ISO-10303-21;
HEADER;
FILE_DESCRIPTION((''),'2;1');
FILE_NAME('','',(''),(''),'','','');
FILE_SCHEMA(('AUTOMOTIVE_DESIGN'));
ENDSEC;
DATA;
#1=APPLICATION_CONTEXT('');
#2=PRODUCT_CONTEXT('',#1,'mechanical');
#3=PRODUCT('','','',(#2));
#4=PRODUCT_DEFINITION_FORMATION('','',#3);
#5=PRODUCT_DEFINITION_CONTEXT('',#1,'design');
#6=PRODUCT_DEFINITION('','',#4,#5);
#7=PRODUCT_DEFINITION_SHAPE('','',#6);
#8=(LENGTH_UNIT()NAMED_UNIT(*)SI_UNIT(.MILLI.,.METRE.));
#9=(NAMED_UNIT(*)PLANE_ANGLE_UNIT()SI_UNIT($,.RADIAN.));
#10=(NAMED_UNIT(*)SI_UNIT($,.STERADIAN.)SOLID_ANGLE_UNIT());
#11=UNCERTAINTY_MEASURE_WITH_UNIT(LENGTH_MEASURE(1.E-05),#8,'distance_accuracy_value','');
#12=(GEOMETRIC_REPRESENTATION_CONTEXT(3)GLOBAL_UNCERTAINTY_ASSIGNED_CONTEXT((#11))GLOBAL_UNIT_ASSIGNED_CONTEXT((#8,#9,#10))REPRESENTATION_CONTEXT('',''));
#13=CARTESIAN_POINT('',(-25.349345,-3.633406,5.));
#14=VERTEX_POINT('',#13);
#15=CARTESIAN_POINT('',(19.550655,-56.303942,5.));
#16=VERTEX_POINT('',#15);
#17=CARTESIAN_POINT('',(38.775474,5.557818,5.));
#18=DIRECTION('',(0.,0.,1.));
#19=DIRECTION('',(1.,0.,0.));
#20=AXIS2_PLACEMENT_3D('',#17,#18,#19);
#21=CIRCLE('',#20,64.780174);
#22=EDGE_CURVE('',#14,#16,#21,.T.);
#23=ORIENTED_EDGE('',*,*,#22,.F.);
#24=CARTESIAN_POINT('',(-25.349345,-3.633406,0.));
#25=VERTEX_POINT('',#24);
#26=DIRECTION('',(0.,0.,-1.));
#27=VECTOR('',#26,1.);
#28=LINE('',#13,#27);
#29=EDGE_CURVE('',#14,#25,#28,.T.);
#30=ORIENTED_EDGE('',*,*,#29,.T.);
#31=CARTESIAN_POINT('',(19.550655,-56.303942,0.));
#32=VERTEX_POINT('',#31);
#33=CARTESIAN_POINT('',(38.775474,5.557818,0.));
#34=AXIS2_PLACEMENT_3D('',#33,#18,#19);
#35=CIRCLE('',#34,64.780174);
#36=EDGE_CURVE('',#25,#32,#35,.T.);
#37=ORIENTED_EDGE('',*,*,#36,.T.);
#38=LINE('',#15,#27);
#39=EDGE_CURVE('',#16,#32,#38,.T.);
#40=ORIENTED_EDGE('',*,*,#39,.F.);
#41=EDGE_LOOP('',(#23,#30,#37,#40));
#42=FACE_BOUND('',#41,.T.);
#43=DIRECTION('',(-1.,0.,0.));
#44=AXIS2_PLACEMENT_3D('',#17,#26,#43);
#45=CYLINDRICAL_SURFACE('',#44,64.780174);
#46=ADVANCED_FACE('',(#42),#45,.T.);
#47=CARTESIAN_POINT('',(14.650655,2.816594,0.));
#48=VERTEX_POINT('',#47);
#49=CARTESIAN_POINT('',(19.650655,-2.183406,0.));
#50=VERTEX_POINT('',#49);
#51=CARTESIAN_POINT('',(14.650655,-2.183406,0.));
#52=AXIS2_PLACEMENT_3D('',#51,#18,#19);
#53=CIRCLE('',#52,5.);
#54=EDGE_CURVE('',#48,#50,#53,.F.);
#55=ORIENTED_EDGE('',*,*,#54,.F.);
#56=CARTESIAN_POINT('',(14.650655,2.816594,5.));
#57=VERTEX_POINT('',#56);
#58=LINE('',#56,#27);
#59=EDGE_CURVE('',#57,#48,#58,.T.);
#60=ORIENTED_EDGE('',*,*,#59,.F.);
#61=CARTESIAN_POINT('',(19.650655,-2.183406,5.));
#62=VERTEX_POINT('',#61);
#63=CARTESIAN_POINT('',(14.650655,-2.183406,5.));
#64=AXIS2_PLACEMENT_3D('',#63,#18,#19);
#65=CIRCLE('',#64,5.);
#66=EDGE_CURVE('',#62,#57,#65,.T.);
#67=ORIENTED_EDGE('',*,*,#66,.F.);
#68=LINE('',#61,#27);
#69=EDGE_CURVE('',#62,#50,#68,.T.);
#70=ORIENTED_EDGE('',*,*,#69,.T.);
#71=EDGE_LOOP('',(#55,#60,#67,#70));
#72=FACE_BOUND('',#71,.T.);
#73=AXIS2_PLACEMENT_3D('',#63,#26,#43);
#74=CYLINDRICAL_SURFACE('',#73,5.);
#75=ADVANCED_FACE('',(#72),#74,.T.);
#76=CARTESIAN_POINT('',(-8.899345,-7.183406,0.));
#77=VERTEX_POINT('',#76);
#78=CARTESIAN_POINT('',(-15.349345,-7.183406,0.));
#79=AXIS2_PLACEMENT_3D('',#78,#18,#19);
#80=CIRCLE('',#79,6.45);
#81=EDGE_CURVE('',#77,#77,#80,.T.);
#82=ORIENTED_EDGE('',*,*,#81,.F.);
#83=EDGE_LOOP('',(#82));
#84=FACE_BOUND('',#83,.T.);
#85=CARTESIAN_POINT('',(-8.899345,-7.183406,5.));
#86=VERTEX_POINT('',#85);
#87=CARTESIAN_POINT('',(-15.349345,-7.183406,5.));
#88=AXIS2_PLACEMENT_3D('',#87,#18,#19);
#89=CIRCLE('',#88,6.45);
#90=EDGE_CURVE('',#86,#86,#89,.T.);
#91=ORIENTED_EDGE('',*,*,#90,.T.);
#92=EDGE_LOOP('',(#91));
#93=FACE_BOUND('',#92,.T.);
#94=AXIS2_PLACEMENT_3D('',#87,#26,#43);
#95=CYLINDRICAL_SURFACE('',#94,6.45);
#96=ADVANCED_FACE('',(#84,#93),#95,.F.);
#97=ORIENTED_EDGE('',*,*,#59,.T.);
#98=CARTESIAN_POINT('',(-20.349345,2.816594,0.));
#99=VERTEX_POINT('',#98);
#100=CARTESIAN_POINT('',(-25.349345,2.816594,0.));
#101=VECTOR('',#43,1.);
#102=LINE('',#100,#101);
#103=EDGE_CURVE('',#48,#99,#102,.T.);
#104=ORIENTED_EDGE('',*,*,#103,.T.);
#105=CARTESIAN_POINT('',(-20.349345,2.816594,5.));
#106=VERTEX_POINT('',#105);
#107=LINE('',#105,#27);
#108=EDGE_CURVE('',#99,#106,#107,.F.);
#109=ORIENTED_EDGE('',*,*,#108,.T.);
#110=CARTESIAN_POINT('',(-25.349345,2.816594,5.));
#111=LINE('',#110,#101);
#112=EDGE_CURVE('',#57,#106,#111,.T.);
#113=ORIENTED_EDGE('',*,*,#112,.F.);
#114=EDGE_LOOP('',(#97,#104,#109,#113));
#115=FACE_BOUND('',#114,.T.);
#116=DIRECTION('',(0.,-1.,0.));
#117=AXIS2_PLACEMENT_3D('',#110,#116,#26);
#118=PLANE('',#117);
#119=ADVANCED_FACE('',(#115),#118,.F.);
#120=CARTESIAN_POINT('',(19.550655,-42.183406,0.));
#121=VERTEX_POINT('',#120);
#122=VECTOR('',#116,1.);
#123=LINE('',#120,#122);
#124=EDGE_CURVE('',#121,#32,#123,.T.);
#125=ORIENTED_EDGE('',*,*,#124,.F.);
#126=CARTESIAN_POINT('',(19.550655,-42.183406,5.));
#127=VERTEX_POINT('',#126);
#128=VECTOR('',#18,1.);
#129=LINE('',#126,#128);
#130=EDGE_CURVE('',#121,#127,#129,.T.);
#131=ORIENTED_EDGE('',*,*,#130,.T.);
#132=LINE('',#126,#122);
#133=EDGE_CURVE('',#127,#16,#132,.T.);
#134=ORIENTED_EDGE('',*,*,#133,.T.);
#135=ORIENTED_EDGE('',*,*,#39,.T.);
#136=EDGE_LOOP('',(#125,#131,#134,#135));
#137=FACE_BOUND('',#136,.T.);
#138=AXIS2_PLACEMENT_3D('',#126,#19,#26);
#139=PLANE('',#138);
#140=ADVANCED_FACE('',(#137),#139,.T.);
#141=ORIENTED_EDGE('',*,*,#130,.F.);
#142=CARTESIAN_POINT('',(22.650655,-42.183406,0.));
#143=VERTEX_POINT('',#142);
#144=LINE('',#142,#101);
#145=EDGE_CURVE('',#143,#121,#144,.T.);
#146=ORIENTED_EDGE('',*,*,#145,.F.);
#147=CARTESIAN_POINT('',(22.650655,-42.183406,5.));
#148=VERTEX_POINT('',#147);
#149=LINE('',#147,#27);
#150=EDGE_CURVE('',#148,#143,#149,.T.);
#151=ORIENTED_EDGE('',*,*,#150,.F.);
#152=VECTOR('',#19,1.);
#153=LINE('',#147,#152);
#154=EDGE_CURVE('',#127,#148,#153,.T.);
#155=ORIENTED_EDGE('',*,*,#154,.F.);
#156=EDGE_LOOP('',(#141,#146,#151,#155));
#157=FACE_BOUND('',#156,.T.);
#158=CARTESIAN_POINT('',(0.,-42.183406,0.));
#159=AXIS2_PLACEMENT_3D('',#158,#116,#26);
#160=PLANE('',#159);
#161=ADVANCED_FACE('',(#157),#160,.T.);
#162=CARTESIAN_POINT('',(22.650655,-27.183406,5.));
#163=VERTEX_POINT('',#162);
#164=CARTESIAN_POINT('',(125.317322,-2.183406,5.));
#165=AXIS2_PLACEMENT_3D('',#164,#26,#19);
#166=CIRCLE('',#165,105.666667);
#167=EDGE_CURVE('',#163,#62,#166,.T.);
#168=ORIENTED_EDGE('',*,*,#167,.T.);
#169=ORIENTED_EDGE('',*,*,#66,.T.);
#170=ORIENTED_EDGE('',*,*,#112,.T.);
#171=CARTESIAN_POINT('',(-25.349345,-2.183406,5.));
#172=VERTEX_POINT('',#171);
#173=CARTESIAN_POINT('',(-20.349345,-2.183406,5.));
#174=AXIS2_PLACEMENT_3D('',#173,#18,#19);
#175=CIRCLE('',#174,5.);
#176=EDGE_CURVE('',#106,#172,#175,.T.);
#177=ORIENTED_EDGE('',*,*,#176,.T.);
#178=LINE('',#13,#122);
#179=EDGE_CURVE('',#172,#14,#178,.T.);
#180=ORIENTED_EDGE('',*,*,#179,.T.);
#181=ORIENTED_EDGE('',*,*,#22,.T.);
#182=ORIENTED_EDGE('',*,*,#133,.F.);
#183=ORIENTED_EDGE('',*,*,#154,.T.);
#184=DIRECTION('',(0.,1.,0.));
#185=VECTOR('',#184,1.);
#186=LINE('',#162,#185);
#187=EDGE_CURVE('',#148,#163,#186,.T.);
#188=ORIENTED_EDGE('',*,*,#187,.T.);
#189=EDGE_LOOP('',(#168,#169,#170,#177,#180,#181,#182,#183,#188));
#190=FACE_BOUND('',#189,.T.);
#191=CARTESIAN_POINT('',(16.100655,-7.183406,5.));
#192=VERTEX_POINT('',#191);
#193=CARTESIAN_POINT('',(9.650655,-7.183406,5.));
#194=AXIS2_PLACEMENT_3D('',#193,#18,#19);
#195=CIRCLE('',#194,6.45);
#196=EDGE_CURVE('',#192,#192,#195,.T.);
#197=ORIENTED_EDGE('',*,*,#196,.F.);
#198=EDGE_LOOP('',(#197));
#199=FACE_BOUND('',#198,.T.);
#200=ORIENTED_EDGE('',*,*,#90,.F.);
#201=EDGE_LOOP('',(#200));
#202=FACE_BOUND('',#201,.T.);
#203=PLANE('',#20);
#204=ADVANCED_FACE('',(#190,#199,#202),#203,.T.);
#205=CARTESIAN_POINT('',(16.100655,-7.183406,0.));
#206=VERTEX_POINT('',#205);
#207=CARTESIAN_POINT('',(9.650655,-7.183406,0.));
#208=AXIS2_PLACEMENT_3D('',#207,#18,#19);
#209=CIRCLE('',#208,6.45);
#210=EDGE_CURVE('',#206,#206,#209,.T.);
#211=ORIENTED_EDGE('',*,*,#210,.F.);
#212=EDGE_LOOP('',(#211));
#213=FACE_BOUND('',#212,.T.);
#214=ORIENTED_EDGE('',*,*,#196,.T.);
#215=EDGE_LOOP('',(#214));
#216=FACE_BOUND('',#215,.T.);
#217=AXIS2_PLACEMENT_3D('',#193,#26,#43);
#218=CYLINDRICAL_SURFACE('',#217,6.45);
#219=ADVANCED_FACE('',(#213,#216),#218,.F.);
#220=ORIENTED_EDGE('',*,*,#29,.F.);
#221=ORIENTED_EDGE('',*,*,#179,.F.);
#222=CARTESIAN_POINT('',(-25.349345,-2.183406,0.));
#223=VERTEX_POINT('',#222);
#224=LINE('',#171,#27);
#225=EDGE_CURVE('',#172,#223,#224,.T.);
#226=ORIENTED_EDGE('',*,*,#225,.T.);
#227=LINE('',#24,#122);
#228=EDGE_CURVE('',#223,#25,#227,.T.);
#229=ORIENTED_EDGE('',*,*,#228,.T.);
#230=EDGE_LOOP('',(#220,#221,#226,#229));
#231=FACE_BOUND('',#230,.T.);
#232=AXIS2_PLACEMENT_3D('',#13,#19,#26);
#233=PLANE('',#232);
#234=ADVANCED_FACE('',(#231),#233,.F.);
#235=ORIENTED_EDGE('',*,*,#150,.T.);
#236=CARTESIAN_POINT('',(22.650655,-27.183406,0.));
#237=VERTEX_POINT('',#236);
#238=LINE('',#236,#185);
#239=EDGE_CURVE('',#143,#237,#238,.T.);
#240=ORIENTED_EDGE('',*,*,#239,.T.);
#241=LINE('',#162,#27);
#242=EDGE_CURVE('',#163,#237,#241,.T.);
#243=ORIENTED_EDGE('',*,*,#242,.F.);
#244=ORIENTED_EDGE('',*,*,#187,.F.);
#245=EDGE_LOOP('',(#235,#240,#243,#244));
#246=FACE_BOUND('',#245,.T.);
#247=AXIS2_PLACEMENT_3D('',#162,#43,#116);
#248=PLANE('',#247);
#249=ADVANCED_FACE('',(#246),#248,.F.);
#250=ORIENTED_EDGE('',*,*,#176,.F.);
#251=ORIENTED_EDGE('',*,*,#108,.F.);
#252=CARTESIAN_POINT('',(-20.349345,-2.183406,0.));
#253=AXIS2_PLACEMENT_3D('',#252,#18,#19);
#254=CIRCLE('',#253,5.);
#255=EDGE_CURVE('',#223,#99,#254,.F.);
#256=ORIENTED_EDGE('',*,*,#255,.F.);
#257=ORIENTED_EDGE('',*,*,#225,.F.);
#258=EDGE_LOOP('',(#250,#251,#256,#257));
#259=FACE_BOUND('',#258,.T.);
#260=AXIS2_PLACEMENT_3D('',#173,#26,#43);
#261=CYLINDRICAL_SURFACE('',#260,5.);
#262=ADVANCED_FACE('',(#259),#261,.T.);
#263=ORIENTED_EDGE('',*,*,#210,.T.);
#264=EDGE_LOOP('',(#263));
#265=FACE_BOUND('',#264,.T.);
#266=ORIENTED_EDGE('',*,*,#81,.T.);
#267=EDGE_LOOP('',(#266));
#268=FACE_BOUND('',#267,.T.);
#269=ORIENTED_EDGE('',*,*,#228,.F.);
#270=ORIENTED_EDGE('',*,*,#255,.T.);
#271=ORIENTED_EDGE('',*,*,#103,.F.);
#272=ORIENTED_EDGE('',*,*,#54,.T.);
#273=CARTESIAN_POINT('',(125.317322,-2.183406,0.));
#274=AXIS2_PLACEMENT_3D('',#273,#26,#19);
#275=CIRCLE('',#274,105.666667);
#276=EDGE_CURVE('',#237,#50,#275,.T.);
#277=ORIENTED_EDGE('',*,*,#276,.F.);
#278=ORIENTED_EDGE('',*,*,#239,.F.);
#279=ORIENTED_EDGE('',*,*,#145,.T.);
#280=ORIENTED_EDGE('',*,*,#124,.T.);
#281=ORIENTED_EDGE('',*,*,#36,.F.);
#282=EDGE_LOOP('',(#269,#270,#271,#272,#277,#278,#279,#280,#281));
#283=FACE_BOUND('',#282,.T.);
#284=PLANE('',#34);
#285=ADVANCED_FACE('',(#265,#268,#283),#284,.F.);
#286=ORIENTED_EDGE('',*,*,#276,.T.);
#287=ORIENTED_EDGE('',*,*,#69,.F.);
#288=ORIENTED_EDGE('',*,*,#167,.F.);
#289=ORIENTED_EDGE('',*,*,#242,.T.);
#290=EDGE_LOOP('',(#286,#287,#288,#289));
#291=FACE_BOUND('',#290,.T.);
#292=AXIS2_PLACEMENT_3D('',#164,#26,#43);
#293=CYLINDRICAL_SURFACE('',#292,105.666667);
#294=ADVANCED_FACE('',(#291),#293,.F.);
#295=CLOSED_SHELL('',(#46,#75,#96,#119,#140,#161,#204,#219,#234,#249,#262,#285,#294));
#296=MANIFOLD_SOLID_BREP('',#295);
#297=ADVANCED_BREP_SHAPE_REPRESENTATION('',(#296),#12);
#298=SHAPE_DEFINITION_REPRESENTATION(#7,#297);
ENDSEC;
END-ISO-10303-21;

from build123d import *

# Parameters (mm, degrees)
SKETCH2_R           = 6.45
BOSS_EXTRUDE1_DEPTH = 5
CUT_EXTRUDE1_START  = -57.18341
SKETCH3_W           = 3.1
SKETCH3_H           = 5
CUT_EXTRUDE1_DEPTH  = 15
FILLET1_R           = 5


with BuildPart() as part:
    # Sketch2 → Boss-Extrude1 (new body)
    with BuildSketch(Plane.XY):
        with BuildLine():
            Line((22.650655022, -27.183406114), (22.650655022, -57.183406114))
            ThreePointArc((22.650655022, -57.183406114), (-9.462495777, -37.680698146), (-25.349344978, -3.633406114))
            Line((-25.349344978, -3.633406114), (-25.349344978, 2.816593886))
            Line((-25.349344978, 2.816593886), (19.650655022, 2.816593886))
            Line((19.650655022, 2.816593886), (19.650655022, -2.183406114))
            ThreePointArc((19.650655022, -2.183406114), (20.403335755, -14.773084426), (22.650655022, -27.183406114))
        make_face()
        with Locations((9.650655022, -7.183406114)):
            Circle(SKETCH2_R, mode=Mode.SUBTRACT)
        with Locations((-15.349344978, -7.183406114)):
            Circle(SKETCH2_R, mode=Mode.SUBTRACT)
    extrude(amount=BOSS_EXTRUDE1_DEPTH)

    # Sketch3 → Cut-Extrude1 (cut)
    with BuildSketch(Plane(origin=(0, 0, 0), x_dir=(1, 0, 0), z_dir=(0, 1, 0)).offset(CUT_EXTRUDE1_START)):
        with Locations((21.100655022, -2.5)):
            Rectangle(SKETCH3_W, SKETCH3_H)
    extrude(amount=CUT_EXTRUDE1_DEPTH, mode=Mode.SUBTRACT)

    # Fillet1
    fillet1_edges = [part.edges().sort_by_distance(p)[0] for p in [
        (-25.349344978, 2.816593886, 2.5),
        (19.650655022, 2.816593886, 2.5),
    ]]
    fillet(fillet1_edges, radius=FILLET1_R - 0.0001)  # a hair under: the kernel refuses the full size


solid = part.part
